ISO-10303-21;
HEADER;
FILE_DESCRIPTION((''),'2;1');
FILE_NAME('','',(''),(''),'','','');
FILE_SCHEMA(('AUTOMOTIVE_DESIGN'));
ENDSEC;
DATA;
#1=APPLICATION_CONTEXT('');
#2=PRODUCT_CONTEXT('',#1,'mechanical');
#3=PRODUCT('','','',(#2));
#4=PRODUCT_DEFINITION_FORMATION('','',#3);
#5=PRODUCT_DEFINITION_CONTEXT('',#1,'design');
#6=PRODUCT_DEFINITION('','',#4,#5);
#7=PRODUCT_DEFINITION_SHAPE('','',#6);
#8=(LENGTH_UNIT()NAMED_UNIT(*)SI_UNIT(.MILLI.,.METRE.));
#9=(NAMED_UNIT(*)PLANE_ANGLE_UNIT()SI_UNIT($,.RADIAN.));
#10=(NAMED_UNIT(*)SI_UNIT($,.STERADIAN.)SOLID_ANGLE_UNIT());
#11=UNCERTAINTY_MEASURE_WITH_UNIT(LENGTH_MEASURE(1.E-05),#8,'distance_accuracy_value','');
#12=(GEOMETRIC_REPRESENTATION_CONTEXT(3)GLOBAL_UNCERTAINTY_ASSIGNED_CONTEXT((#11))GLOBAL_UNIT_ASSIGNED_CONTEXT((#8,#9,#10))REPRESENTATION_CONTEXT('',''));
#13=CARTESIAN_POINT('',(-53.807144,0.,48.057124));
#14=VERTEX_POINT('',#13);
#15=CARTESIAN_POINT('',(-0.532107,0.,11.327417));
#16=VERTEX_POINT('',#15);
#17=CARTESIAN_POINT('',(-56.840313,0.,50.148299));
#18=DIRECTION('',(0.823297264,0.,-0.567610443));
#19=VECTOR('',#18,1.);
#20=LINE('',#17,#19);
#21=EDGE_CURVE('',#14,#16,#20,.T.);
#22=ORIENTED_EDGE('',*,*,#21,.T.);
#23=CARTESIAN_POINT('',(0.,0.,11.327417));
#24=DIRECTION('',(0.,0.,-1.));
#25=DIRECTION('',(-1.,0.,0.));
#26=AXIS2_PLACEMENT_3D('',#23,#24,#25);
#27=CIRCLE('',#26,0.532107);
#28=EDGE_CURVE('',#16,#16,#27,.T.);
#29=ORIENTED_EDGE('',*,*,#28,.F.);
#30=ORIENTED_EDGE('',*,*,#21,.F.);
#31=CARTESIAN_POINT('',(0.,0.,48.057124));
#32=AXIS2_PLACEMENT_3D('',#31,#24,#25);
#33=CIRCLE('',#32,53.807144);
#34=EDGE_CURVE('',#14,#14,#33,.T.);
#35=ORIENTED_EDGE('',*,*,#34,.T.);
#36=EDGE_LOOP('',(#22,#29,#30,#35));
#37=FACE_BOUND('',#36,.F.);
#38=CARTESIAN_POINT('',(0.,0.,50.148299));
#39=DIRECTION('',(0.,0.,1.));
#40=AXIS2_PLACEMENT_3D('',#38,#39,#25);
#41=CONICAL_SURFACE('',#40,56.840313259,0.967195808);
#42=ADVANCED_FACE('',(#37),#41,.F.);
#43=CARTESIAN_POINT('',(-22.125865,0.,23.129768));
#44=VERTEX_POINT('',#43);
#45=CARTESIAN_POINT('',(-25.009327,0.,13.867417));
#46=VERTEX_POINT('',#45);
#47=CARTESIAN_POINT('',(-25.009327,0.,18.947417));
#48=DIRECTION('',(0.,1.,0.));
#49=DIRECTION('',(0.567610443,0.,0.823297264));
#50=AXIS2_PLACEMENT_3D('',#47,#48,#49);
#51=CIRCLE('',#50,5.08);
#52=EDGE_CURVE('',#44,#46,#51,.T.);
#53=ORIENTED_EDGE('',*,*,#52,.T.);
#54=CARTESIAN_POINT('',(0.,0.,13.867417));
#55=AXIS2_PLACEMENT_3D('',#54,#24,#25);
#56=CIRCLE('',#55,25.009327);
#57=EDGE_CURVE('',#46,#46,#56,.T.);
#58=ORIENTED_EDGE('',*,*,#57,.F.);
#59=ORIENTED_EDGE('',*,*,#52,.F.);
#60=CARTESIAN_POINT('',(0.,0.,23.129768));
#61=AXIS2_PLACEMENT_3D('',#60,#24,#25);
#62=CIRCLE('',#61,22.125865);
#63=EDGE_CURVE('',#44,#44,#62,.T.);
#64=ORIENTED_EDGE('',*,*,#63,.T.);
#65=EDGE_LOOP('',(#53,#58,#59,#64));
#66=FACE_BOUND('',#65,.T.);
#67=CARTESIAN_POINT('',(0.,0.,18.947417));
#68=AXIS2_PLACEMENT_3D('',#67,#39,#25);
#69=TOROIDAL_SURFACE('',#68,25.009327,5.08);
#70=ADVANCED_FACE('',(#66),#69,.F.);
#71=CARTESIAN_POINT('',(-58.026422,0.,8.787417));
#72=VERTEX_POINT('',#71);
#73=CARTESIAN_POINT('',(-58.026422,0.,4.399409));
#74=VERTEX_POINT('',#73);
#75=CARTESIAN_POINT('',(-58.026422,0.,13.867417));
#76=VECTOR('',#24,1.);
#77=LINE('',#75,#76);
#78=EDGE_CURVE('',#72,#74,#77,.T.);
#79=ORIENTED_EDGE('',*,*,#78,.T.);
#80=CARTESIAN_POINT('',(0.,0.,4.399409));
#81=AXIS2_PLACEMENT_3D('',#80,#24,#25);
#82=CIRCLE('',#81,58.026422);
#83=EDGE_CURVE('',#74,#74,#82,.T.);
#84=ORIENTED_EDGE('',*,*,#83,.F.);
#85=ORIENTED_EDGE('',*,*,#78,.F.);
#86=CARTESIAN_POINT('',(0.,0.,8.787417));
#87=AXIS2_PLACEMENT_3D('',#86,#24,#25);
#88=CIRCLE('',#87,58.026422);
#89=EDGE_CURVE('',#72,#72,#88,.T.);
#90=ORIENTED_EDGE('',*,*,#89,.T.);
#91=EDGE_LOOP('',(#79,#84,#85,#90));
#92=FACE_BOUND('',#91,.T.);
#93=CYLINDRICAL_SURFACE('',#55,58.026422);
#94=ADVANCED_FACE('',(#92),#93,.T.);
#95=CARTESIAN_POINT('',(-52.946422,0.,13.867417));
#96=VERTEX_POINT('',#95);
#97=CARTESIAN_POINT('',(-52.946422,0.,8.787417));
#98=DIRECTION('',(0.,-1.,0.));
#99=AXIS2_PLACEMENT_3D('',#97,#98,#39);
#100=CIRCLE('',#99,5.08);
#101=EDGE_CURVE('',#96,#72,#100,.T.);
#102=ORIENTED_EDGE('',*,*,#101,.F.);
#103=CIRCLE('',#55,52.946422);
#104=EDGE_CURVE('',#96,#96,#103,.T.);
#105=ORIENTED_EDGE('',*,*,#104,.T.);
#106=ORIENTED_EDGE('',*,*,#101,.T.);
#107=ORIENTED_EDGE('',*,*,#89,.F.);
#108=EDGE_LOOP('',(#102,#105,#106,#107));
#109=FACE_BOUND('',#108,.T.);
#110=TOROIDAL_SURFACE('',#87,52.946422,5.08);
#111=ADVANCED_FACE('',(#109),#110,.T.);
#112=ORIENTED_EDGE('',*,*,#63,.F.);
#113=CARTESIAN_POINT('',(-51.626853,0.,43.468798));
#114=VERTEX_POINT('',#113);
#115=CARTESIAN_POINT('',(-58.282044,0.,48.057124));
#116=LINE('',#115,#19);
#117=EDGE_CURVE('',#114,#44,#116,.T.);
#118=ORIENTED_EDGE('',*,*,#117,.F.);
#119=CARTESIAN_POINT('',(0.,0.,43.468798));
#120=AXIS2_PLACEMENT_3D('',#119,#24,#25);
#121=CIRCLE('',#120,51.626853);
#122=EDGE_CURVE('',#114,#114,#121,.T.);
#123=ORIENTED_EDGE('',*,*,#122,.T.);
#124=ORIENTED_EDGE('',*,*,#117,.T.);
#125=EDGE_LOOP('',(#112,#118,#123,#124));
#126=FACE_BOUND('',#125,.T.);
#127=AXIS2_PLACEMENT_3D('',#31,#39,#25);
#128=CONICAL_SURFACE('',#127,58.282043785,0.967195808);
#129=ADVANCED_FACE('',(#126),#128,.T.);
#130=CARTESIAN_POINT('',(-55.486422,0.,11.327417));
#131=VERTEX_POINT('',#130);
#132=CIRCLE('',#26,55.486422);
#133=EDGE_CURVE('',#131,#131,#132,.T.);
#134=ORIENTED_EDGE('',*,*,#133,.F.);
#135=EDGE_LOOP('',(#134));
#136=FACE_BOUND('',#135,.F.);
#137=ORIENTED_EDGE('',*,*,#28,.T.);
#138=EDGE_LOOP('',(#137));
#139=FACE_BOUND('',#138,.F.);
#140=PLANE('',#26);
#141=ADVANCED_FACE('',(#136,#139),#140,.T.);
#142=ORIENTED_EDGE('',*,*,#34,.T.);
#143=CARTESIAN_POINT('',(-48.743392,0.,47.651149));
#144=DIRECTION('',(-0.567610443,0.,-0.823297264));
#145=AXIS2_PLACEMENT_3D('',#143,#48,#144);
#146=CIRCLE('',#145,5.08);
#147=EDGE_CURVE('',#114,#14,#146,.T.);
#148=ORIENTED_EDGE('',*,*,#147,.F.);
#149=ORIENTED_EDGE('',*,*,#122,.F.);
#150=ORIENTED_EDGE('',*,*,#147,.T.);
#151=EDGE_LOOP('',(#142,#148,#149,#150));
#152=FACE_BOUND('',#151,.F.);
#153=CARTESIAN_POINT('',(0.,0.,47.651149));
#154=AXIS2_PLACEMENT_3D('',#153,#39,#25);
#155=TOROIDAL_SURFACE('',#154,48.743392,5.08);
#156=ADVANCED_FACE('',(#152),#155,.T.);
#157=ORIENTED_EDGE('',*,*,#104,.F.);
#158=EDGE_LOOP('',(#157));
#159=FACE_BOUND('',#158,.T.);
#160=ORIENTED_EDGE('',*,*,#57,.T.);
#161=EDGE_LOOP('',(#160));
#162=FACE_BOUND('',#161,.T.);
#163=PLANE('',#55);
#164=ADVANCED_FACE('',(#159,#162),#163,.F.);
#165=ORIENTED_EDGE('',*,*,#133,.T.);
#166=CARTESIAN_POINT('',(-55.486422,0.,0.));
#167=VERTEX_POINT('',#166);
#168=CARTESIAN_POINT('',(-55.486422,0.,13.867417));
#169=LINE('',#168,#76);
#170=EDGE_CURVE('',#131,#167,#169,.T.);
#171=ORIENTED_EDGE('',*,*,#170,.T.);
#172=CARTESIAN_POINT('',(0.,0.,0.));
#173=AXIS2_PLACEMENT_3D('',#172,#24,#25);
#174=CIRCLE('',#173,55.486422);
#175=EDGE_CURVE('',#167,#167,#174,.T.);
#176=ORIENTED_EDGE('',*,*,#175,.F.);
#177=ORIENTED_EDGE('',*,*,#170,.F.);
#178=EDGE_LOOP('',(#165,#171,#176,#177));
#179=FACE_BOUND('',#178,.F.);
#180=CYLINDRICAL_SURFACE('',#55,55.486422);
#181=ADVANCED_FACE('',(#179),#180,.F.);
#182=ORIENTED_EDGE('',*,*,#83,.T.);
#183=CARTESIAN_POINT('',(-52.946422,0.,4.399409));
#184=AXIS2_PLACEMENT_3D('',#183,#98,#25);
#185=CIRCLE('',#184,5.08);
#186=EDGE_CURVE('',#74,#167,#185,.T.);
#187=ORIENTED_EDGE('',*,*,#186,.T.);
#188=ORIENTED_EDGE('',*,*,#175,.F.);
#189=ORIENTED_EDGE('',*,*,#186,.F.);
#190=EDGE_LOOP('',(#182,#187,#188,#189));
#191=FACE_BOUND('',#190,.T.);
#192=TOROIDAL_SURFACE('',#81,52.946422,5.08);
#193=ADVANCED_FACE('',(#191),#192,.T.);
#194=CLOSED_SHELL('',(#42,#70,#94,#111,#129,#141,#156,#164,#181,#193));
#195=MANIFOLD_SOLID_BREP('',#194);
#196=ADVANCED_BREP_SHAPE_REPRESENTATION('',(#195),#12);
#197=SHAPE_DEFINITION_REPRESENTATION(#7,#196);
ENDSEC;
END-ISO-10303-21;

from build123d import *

# Parameters (mm, degrees)
F2_T = -2.54


# Not quite as in the source:
# - a fillet or chamfer that OpenCascade refuses, or shapes differently, is made with other operations: its cross-section is extruded or revolved along the edge and cut away or added


with BuildPart() as f1:
    # F0 (on Front) → F1 (revolve)
    with BuildSketch(Plane.XZ):
        Polygon((-8.6911804974, 13.8674174355), (0, 13.8674174355), (0, 48.0571240187), (-58.2820437849, 48.0571240187), align=None)
        Polygon((-58.0264218152, 0), (0, 0), (0, 13.8674174355), (-8.6911804974, 13.8674174355), (-58.0264218152, 13.8674174355), align=None)
    revolve(axis=Axis((0, 0, 30.9622707271), (0, 0, -1)))

    # F2
    f2_openings = [f1.faces().sort_by_distance(p)[0] for p in [
        (0, 0, 48.057124),
        (0, 0, 0),
    ]]
    offset(amount=F2_T, openings=f2_openings, kind=Kind.INTERSECTION)

    # F3: fillet of radius 5.08 on 6 edges, made by hand

    # F3_s1 → F3_t2 (revolve)
    with BuildSketch(Plane.XZ):
        with BuildLine():
            ThreePointArc((-22.1258654795, 23.1297675365), (-20.1589276546, 17.4374403683), (-25.0093265306, 13.8674174355))
            Line((-25.0093265306, 13.8674174355), (-8.6911804974, 13.8674174355))
            Line((-8.6911804974, 13.8674174355), (-22.1258654795, 23.1297675365))
        make_face()
    revolve(axis=Axis((0, 0, 13.8674174355), (0, 0, -1)))

    # F3_s3 → F3_t4 (revolve, cut)
    with BuildSketch(Plane.XZ):
        with BuildLine():
            ThreePointArc((-51.6268528261, 43.4687984471), (-53.3317173465, 45.4708576387), (-53.8071437354, 48.0571240187))
            Line((-53.8071437354, 48.0571240187), (-58.2820437849, 48.0571240187))
            Line((-58.2820437849, 48.0571240187), (-51.6268528261, 43.4687984471))
        make_face()
    revolve(axis=Axis((0, 0, 48.0571240187), (0, 0, -1)), mode=Mode.SUBTRACT)

    # F3_s5 → F3_t6 (revolve, cut)
    with BuildSketch(Plane.XZ):
        with BuildLine():
            ThreePointArc((-52.9464218152, 13.8674174355), (-56.5385242636, 12.3795198839), (-58.0264218152, 8.7874174355))
            Line((-58.0264218152, 8.7874174355), (-58.0264218152, 13.8674174355))
            Line((-58.0264218152, 13.8674174355), (-52.9464218152, 13.8674174355))
        make_face()
    revolve(axis=Axis((0, 0, 13.8674174355), (0, 0, -1)), mode=Mode.SUBTRACT)

    # F3_s7 → F3_t8 (revolve, cut)
    with BuildSketch(Plane.XZ):
        with BuildLine():
            ThreePointArc((-58.0264218152, 4.3994090512), (-57.3458308664, 1.8594090512), (-55.4864218152, 0))
            Line((-55.4864218152, 0), (-58.0264218152, 0))
            Line((-58.0264218152, 0), (-58.0264218152, 4.3994090512))
        make_face()
    revolve(axis=Axis((0, 0, 0), (0, 0, -1)), mode=Mode.SUBTRACT)


solid = f1.part
